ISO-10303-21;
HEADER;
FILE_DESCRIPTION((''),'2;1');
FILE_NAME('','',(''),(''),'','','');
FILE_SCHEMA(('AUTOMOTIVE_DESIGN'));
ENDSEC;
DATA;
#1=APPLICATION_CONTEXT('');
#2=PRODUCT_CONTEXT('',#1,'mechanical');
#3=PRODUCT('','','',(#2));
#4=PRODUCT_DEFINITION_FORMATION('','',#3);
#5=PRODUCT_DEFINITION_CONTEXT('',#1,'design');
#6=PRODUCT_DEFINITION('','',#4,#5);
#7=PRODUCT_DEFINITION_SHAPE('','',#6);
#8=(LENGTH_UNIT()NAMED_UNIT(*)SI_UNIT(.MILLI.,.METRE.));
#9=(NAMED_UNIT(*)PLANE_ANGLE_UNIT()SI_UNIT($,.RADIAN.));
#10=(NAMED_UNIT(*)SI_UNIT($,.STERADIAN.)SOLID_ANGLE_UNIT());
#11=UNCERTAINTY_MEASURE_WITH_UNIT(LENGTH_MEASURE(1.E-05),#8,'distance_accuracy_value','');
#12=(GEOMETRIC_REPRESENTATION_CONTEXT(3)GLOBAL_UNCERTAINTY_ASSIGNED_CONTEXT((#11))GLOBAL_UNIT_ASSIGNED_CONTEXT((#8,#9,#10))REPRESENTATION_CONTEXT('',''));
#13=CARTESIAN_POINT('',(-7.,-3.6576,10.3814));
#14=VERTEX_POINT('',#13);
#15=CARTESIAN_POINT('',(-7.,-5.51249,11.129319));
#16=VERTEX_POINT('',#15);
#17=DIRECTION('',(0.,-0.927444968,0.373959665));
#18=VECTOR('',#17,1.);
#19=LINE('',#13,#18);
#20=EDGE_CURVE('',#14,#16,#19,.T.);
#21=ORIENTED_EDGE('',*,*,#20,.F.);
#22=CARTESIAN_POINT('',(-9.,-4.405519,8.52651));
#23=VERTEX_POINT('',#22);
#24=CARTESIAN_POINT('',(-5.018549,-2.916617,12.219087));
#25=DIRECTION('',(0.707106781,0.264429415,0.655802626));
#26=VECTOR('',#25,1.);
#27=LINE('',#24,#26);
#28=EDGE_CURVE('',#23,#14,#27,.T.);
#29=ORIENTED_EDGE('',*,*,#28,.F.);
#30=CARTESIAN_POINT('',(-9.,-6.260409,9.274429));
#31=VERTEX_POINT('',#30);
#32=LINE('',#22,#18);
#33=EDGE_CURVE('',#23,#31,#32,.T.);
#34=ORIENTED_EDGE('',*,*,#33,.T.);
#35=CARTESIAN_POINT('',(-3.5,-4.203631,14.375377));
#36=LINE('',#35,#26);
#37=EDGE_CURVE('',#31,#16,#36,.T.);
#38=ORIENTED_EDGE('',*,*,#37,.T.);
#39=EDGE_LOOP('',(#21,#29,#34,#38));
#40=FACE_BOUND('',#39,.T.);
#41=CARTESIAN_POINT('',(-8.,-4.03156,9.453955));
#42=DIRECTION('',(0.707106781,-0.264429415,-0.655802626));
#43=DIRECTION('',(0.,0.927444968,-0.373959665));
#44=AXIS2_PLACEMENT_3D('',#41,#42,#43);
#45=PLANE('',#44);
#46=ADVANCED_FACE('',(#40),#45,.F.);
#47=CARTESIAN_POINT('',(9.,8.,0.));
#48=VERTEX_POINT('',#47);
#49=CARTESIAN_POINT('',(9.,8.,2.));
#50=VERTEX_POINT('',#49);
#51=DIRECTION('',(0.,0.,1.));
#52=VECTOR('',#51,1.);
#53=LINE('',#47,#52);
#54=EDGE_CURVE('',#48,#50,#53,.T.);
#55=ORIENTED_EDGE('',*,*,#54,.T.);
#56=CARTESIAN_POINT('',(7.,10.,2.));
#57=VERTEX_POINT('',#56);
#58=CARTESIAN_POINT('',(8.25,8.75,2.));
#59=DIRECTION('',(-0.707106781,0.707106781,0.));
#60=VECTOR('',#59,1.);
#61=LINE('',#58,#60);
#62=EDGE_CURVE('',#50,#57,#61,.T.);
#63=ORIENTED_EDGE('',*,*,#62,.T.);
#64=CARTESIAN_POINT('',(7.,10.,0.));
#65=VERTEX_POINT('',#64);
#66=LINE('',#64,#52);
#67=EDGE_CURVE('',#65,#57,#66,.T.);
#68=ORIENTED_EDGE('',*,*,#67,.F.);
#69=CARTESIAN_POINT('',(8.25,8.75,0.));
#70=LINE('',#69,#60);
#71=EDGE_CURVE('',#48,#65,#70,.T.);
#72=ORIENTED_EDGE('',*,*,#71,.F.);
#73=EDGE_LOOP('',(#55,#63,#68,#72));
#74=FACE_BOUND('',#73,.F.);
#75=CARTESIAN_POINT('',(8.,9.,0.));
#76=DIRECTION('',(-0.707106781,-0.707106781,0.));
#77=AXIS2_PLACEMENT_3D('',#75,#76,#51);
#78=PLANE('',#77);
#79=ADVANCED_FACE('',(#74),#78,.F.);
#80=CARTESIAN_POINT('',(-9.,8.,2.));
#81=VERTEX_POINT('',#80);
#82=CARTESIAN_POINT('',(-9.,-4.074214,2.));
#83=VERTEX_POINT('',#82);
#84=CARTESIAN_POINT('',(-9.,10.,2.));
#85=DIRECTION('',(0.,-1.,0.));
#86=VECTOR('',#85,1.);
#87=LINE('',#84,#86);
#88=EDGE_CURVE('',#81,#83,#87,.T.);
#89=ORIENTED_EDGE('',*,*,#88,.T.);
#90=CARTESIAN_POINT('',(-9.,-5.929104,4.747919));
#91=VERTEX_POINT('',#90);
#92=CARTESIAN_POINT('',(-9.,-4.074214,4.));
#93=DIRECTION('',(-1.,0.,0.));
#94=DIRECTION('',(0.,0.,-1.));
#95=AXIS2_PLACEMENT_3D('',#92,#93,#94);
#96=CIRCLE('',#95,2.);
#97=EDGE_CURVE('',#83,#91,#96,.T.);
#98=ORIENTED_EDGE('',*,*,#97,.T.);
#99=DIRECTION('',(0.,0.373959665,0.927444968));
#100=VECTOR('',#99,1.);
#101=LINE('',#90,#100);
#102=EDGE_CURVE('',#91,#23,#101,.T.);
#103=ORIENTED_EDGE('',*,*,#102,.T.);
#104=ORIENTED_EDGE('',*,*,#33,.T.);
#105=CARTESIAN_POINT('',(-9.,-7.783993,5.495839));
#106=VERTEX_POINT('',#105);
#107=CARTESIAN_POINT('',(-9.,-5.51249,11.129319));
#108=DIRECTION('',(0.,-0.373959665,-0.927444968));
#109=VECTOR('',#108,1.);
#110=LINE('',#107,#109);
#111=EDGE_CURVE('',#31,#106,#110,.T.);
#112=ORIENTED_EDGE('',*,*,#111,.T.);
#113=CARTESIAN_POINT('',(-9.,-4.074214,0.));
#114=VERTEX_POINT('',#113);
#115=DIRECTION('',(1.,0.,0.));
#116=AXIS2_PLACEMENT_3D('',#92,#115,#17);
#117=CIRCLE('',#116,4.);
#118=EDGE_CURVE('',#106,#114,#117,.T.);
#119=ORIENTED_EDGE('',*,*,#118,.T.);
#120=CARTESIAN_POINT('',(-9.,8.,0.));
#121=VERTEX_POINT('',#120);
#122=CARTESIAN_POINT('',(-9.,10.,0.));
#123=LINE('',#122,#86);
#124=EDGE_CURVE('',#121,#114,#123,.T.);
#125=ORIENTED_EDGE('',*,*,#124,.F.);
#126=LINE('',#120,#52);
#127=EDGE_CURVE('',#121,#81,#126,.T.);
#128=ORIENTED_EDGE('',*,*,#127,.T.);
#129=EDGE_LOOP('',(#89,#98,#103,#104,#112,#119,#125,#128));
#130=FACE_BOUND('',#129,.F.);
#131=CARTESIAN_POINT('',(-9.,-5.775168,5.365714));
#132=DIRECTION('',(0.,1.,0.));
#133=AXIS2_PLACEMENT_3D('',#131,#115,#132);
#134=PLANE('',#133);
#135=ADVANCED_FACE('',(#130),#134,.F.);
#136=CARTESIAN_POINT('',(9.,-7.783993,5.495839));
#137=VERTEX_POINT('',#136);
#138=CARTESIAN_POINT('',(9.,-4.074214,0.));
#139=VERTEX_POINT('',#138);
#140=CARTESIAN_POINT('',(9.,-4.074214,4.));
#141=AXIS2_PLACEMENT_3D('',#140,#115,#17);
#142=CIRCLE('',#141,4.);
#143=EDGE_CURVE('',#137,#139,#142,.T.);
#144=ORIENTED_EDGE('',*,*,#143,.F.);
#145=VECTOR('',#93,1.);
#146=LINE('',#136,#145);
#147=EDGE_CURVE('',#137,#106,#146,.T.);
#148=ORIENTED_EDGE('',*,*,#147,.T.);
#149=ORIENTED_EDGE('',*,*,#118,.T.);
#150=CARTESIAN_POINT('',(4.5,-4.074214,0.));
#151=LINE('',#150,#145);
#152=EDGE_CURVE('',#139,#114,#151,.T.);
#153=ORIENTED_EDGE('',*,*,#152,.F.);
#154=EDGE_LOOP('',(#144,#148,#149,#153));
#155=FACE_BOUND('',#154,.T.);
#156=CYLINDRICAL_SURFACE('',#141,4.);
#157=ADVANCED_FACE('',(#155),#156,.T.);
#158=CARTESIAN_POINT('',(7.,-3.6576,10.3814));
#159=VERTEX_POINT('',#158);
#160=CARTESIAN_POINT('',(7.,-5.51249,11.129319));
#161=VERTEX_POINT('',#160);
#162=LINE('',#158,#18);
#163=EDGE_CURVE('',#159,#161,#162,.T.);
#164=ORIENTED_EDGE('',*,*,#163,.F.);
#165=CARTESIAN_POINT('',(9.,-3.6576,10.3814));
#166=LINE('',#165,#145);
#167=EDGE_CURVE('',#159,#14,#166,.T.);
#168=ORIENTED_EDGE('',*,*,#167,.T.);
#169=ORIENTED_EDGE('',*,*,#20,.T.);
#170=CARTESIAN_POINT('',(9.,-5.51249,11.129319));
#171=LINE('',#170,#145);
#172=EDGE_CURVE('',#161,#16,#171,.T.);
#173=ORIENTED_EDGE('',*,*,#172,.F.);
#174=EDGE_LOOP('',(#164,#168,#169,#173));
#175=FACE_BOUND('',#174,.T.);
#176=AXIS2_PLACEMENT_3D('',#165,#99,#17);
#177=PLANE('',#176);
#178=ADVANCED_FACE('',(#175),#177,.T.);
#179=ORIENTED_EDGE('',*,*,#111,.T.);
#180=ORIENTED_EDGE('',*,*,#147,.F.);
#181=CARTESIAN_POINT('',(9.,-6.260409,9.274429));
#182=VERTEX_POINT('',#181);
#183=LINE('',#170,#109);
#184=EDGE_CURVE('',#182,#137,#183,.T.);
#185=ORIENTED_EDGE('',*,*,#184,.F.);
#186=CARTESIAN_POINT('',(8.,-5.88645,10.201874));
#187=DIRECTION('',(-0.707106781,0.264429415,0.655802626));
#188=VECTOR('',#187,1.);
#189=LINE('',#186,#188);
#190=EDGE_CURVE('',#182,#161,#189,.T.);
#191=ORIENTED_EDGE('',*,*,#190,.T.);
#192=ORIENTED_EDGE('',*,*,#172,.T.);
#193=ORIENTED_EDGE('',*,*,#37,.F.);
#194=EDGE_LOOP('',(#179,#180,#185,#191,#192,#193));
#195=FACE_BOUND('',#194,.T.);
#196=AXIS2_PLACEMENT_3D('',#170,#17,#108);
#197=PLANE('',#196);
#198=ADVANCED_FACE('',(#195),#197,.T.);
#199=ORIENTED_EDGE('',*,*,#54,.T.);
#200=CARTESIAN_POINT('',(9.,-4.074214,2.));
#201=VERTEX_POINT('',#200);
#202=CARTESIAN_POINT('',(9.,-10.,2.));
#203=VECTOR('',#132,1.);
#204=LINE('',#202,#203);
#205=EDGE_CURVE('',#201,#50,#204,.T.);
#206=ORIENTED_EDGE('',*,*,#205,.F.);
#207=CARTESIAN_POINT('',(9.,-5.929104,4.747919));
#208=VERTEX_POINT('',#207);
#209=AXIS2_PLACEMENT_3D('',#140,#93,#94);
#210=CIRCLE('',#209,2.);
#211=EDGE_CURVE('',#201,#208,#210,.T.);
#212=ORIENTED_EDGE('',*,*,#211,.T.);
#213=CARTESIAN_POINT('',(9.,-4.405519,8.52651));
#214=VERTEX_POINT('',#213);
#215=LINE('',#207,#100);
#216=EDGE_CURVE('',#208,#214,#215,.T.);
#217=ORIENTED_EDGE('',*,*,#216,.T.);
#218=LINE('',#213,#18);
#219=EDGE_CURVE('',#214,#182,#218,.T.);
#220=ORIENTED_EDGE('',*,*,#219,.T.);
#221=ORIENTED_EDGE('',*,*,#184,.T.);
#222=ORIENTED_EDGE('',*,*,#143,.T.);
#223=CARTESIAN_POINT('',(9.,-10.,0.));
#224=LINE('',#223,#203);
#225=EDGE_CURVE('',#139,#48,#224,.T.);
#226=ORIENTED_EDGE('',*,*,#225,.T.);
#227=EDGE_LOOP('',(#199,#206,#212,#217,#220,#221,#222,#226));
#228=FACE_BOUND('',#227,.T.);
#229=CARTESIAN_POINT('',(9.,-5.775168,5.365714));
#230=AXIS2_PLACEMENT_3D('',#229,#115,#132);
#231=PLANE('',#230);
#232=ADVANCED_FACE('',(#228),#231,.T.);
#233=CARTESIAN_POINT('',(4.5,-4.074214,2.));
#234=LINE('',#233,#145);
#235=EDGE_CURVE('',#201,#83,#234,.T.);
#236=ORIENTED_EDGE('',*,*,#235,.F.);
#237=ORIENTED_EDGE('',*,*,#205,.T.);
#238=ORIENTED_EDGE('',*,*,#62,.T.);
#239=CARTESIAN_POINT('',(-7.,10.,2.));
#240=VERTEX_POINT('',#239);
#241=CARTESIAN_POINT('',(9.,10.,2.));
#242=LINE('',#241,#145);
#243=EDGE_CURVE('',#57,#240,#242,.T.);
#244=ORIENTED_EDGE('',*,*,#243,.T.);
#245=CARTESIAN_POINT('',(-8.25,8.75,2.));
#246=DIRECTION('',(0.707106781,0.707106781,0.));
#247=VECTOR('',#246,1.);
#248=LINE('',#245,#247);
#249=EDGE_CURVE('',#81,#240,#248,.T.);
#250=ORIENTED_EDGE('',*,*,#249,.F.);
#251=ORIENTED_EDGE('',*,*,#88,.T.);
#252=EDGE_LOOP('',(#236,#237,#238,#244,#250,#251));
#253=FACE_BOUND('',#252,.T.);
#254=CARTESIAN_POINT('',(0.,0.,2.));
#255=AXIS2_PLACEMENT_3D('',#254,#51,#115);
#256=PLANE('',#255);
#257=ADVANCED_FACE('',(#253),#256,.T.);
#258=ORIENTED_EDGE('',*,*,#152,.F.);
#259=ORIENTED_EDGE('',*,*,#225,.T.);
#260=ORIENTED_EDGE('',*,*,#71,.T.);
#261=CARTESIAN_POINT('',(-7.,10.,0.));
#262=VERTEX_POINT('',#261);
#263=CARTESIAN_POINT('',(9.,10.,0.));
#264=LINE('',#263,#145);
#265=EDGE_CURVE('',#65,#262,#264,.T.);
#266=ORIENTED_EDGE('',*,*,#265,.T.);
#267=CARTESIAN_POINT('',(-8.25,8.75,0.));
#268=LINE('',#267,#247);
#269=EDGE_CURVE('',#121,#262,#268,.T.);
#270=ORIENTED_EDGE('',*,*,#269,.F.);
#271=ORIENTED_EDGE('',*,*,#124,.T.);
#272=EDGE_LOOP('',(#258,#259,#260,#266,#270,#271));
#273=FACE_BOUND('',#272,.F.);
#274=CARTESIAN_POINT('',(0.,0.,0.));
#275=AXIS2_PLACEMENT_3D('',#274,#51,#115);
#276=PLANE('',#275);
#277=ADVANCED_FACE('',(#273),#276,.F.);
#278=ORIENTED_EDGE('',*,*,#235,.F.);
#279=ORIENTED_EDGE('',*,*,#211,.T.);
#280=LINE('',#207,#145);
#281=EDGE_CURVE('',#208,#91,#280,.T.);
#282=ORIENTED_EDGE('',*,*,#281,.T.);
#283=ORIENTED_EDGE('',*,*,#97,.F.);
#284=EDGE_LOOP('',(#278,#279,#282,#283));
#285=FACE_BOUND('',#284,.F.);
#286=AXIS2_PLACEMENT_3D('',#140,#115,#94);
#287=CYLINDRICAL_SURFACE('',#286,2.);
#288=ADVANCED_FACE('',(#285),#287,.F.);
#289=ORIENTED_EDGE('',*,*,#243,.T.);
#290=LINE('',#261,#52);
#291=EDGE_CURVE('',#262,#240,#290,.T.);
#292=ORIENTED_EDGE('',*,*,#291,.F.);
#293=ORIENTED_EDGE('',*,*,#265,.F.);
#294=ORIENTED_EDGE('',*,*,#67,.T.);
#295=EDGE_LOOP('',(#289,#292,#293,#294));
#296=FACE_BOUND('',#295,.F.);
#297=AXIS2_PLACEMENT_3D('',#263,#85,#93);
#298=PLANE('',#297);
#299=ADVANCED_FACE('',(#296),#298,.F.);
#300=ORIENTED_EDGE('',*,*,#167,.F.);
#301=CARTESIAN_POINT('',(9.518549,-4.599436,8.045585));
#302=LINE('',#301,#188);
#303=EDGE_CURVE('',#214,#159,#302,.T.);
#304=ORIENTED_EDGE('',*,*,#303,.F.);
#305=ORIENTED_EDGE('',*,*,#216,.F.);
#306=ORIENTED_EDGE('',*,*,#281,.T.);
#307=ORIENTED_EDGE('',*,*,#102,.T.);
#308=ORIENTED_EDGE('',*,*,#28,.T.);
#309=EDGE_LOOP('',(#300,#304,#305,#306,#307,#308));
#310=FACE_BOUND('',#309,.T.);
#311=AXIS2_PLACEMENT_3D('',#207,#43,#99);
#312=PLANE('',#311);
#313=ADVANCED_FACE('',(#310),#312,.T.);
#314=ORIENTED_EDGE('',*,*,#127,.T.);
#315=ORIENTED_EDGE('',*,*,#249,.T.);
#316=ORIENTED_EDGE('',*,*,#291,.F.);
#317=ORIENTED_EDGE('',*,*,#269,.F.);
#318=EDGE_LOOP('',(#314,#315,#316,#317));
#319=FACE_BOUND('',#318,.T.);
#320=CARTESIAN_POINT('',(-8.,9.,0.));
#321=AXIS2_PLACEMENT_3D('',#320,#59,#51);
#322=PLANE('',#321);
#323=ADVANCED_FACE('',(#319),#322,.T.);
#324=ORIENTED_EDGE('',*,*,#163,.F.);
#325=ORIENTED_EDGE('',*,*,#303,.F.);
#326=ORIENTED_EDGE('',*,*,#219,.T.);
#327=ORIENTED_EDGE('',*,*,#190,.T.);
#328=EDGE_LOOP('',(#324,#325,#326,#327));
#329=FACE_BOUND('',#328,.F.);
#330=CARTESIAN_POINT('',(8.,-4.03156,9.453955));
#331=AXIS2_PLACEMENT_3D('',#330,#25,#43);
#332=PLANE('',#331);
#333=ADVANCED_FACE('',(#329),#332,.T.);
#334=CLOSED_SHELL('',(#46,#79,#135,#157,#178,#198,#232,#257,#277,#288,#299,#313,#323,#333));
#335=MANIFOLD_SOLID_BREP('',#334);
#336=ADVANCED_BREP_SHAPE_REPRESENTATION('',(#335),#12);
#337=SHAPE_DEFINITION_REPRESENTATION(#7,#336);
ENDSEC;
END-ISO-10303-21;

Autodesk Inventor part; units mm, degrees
ref_plane "YZ Plane" through (0, 0, 0) normal (1, 0, 0) x (0, 1, 0)
ref_plane "XZ Plane" through (0, 0, 0) normal (0, 1, 0) x (-1, 0, 0)
ref_plane "XY Plane" through (0, 0, 0) normal (0, 0, 1) x (1, 0, 0)
sketch "Sketch1" plane through (0, 0, 0) normal (0, 0, 1) x (1, 0, 0)
  line L0 (-9, -10) -> (9, -10)
  line L1 (9, -10) -> (9, 10)
  line L2 (9, 10) -> (-9, 10)
  line L3 (-9, 10) -> (-9, -10)
  line L4 (-9, -10) -> (9, 10) construction
  line L5 (9, -10) -> (-9, 10) construction
  point P0 (0, 0)
  dimension "d0" = 18
  dimension "d1" = 20
extrude "Plate1" add sketch "Sketch1" along normal blind 2
sketch "Sketch2" plane through (9, -8.1451, -0.7479) normal (0, -0.9274452, 0.3739592) x (1, 0, 0)
  line L0 (-18, 0) -> (0, 0)
  line L1 (0, 0) -> (0, 12)
  line L2 (0, 12) -> (-18, 12)
  line L3 (-18, 12) -> (-18, 0)
edge flange "Flange1" height 12 angle 111.96 thickness 2 bend radius 2 thickness toward (0, -0.9274452, 0.3739592) relief tear relief width 2 relief depth 1 edges at (0, -10, 2) wall of the first edge with corners at (-9, -8.1451, -0.7479) (9, -8.1451, -0.7479) (9, -3.6576, 10.3814) (-9, -3.6576, 10.3814)
bend "Bend1"
corner "Corner1"
chamfer "Corner Chamfer1" distance 2 angle 45 4 edges at (-9, 10, 1) (9, 10, 1) (-9, -4.585, 10.7554) (9, -4.585, 10.7554)
equation "\"d3\" = BendReliefWidth"
equation "\"d4\" = BendReliefDepth"
equation "\"d5\" = MinimumRemnant"
equation "\"d6\" = BendRadius"
equation "\"d9\" = BendRadius"
equation "\"d10\" = CornerReliefSize"
equation "\"d11\" = GapSize"
equation "\"d12\" = JacobiRadiusSize"
equation "\"BendRadius\" = Thickness"
equation "\"BendReliefWidth\" = Thickness"
equation "\"BendReliefDepth\" = 0.5 * Thickness"
equation "\"CornerReliefSize\" = 4 * Thickness"
equation "\"MinimumRemnant\" = 2 * Thickness"
equation "\"TransitionRadius\" = BendRadius"
equation "\"JacobiRadiusSize\" = BendRadius"
equation "\"GapSize\" = Thickness"
equation "\"d2\" = BendRadius"
equation "\"Thickness\" = 2"
